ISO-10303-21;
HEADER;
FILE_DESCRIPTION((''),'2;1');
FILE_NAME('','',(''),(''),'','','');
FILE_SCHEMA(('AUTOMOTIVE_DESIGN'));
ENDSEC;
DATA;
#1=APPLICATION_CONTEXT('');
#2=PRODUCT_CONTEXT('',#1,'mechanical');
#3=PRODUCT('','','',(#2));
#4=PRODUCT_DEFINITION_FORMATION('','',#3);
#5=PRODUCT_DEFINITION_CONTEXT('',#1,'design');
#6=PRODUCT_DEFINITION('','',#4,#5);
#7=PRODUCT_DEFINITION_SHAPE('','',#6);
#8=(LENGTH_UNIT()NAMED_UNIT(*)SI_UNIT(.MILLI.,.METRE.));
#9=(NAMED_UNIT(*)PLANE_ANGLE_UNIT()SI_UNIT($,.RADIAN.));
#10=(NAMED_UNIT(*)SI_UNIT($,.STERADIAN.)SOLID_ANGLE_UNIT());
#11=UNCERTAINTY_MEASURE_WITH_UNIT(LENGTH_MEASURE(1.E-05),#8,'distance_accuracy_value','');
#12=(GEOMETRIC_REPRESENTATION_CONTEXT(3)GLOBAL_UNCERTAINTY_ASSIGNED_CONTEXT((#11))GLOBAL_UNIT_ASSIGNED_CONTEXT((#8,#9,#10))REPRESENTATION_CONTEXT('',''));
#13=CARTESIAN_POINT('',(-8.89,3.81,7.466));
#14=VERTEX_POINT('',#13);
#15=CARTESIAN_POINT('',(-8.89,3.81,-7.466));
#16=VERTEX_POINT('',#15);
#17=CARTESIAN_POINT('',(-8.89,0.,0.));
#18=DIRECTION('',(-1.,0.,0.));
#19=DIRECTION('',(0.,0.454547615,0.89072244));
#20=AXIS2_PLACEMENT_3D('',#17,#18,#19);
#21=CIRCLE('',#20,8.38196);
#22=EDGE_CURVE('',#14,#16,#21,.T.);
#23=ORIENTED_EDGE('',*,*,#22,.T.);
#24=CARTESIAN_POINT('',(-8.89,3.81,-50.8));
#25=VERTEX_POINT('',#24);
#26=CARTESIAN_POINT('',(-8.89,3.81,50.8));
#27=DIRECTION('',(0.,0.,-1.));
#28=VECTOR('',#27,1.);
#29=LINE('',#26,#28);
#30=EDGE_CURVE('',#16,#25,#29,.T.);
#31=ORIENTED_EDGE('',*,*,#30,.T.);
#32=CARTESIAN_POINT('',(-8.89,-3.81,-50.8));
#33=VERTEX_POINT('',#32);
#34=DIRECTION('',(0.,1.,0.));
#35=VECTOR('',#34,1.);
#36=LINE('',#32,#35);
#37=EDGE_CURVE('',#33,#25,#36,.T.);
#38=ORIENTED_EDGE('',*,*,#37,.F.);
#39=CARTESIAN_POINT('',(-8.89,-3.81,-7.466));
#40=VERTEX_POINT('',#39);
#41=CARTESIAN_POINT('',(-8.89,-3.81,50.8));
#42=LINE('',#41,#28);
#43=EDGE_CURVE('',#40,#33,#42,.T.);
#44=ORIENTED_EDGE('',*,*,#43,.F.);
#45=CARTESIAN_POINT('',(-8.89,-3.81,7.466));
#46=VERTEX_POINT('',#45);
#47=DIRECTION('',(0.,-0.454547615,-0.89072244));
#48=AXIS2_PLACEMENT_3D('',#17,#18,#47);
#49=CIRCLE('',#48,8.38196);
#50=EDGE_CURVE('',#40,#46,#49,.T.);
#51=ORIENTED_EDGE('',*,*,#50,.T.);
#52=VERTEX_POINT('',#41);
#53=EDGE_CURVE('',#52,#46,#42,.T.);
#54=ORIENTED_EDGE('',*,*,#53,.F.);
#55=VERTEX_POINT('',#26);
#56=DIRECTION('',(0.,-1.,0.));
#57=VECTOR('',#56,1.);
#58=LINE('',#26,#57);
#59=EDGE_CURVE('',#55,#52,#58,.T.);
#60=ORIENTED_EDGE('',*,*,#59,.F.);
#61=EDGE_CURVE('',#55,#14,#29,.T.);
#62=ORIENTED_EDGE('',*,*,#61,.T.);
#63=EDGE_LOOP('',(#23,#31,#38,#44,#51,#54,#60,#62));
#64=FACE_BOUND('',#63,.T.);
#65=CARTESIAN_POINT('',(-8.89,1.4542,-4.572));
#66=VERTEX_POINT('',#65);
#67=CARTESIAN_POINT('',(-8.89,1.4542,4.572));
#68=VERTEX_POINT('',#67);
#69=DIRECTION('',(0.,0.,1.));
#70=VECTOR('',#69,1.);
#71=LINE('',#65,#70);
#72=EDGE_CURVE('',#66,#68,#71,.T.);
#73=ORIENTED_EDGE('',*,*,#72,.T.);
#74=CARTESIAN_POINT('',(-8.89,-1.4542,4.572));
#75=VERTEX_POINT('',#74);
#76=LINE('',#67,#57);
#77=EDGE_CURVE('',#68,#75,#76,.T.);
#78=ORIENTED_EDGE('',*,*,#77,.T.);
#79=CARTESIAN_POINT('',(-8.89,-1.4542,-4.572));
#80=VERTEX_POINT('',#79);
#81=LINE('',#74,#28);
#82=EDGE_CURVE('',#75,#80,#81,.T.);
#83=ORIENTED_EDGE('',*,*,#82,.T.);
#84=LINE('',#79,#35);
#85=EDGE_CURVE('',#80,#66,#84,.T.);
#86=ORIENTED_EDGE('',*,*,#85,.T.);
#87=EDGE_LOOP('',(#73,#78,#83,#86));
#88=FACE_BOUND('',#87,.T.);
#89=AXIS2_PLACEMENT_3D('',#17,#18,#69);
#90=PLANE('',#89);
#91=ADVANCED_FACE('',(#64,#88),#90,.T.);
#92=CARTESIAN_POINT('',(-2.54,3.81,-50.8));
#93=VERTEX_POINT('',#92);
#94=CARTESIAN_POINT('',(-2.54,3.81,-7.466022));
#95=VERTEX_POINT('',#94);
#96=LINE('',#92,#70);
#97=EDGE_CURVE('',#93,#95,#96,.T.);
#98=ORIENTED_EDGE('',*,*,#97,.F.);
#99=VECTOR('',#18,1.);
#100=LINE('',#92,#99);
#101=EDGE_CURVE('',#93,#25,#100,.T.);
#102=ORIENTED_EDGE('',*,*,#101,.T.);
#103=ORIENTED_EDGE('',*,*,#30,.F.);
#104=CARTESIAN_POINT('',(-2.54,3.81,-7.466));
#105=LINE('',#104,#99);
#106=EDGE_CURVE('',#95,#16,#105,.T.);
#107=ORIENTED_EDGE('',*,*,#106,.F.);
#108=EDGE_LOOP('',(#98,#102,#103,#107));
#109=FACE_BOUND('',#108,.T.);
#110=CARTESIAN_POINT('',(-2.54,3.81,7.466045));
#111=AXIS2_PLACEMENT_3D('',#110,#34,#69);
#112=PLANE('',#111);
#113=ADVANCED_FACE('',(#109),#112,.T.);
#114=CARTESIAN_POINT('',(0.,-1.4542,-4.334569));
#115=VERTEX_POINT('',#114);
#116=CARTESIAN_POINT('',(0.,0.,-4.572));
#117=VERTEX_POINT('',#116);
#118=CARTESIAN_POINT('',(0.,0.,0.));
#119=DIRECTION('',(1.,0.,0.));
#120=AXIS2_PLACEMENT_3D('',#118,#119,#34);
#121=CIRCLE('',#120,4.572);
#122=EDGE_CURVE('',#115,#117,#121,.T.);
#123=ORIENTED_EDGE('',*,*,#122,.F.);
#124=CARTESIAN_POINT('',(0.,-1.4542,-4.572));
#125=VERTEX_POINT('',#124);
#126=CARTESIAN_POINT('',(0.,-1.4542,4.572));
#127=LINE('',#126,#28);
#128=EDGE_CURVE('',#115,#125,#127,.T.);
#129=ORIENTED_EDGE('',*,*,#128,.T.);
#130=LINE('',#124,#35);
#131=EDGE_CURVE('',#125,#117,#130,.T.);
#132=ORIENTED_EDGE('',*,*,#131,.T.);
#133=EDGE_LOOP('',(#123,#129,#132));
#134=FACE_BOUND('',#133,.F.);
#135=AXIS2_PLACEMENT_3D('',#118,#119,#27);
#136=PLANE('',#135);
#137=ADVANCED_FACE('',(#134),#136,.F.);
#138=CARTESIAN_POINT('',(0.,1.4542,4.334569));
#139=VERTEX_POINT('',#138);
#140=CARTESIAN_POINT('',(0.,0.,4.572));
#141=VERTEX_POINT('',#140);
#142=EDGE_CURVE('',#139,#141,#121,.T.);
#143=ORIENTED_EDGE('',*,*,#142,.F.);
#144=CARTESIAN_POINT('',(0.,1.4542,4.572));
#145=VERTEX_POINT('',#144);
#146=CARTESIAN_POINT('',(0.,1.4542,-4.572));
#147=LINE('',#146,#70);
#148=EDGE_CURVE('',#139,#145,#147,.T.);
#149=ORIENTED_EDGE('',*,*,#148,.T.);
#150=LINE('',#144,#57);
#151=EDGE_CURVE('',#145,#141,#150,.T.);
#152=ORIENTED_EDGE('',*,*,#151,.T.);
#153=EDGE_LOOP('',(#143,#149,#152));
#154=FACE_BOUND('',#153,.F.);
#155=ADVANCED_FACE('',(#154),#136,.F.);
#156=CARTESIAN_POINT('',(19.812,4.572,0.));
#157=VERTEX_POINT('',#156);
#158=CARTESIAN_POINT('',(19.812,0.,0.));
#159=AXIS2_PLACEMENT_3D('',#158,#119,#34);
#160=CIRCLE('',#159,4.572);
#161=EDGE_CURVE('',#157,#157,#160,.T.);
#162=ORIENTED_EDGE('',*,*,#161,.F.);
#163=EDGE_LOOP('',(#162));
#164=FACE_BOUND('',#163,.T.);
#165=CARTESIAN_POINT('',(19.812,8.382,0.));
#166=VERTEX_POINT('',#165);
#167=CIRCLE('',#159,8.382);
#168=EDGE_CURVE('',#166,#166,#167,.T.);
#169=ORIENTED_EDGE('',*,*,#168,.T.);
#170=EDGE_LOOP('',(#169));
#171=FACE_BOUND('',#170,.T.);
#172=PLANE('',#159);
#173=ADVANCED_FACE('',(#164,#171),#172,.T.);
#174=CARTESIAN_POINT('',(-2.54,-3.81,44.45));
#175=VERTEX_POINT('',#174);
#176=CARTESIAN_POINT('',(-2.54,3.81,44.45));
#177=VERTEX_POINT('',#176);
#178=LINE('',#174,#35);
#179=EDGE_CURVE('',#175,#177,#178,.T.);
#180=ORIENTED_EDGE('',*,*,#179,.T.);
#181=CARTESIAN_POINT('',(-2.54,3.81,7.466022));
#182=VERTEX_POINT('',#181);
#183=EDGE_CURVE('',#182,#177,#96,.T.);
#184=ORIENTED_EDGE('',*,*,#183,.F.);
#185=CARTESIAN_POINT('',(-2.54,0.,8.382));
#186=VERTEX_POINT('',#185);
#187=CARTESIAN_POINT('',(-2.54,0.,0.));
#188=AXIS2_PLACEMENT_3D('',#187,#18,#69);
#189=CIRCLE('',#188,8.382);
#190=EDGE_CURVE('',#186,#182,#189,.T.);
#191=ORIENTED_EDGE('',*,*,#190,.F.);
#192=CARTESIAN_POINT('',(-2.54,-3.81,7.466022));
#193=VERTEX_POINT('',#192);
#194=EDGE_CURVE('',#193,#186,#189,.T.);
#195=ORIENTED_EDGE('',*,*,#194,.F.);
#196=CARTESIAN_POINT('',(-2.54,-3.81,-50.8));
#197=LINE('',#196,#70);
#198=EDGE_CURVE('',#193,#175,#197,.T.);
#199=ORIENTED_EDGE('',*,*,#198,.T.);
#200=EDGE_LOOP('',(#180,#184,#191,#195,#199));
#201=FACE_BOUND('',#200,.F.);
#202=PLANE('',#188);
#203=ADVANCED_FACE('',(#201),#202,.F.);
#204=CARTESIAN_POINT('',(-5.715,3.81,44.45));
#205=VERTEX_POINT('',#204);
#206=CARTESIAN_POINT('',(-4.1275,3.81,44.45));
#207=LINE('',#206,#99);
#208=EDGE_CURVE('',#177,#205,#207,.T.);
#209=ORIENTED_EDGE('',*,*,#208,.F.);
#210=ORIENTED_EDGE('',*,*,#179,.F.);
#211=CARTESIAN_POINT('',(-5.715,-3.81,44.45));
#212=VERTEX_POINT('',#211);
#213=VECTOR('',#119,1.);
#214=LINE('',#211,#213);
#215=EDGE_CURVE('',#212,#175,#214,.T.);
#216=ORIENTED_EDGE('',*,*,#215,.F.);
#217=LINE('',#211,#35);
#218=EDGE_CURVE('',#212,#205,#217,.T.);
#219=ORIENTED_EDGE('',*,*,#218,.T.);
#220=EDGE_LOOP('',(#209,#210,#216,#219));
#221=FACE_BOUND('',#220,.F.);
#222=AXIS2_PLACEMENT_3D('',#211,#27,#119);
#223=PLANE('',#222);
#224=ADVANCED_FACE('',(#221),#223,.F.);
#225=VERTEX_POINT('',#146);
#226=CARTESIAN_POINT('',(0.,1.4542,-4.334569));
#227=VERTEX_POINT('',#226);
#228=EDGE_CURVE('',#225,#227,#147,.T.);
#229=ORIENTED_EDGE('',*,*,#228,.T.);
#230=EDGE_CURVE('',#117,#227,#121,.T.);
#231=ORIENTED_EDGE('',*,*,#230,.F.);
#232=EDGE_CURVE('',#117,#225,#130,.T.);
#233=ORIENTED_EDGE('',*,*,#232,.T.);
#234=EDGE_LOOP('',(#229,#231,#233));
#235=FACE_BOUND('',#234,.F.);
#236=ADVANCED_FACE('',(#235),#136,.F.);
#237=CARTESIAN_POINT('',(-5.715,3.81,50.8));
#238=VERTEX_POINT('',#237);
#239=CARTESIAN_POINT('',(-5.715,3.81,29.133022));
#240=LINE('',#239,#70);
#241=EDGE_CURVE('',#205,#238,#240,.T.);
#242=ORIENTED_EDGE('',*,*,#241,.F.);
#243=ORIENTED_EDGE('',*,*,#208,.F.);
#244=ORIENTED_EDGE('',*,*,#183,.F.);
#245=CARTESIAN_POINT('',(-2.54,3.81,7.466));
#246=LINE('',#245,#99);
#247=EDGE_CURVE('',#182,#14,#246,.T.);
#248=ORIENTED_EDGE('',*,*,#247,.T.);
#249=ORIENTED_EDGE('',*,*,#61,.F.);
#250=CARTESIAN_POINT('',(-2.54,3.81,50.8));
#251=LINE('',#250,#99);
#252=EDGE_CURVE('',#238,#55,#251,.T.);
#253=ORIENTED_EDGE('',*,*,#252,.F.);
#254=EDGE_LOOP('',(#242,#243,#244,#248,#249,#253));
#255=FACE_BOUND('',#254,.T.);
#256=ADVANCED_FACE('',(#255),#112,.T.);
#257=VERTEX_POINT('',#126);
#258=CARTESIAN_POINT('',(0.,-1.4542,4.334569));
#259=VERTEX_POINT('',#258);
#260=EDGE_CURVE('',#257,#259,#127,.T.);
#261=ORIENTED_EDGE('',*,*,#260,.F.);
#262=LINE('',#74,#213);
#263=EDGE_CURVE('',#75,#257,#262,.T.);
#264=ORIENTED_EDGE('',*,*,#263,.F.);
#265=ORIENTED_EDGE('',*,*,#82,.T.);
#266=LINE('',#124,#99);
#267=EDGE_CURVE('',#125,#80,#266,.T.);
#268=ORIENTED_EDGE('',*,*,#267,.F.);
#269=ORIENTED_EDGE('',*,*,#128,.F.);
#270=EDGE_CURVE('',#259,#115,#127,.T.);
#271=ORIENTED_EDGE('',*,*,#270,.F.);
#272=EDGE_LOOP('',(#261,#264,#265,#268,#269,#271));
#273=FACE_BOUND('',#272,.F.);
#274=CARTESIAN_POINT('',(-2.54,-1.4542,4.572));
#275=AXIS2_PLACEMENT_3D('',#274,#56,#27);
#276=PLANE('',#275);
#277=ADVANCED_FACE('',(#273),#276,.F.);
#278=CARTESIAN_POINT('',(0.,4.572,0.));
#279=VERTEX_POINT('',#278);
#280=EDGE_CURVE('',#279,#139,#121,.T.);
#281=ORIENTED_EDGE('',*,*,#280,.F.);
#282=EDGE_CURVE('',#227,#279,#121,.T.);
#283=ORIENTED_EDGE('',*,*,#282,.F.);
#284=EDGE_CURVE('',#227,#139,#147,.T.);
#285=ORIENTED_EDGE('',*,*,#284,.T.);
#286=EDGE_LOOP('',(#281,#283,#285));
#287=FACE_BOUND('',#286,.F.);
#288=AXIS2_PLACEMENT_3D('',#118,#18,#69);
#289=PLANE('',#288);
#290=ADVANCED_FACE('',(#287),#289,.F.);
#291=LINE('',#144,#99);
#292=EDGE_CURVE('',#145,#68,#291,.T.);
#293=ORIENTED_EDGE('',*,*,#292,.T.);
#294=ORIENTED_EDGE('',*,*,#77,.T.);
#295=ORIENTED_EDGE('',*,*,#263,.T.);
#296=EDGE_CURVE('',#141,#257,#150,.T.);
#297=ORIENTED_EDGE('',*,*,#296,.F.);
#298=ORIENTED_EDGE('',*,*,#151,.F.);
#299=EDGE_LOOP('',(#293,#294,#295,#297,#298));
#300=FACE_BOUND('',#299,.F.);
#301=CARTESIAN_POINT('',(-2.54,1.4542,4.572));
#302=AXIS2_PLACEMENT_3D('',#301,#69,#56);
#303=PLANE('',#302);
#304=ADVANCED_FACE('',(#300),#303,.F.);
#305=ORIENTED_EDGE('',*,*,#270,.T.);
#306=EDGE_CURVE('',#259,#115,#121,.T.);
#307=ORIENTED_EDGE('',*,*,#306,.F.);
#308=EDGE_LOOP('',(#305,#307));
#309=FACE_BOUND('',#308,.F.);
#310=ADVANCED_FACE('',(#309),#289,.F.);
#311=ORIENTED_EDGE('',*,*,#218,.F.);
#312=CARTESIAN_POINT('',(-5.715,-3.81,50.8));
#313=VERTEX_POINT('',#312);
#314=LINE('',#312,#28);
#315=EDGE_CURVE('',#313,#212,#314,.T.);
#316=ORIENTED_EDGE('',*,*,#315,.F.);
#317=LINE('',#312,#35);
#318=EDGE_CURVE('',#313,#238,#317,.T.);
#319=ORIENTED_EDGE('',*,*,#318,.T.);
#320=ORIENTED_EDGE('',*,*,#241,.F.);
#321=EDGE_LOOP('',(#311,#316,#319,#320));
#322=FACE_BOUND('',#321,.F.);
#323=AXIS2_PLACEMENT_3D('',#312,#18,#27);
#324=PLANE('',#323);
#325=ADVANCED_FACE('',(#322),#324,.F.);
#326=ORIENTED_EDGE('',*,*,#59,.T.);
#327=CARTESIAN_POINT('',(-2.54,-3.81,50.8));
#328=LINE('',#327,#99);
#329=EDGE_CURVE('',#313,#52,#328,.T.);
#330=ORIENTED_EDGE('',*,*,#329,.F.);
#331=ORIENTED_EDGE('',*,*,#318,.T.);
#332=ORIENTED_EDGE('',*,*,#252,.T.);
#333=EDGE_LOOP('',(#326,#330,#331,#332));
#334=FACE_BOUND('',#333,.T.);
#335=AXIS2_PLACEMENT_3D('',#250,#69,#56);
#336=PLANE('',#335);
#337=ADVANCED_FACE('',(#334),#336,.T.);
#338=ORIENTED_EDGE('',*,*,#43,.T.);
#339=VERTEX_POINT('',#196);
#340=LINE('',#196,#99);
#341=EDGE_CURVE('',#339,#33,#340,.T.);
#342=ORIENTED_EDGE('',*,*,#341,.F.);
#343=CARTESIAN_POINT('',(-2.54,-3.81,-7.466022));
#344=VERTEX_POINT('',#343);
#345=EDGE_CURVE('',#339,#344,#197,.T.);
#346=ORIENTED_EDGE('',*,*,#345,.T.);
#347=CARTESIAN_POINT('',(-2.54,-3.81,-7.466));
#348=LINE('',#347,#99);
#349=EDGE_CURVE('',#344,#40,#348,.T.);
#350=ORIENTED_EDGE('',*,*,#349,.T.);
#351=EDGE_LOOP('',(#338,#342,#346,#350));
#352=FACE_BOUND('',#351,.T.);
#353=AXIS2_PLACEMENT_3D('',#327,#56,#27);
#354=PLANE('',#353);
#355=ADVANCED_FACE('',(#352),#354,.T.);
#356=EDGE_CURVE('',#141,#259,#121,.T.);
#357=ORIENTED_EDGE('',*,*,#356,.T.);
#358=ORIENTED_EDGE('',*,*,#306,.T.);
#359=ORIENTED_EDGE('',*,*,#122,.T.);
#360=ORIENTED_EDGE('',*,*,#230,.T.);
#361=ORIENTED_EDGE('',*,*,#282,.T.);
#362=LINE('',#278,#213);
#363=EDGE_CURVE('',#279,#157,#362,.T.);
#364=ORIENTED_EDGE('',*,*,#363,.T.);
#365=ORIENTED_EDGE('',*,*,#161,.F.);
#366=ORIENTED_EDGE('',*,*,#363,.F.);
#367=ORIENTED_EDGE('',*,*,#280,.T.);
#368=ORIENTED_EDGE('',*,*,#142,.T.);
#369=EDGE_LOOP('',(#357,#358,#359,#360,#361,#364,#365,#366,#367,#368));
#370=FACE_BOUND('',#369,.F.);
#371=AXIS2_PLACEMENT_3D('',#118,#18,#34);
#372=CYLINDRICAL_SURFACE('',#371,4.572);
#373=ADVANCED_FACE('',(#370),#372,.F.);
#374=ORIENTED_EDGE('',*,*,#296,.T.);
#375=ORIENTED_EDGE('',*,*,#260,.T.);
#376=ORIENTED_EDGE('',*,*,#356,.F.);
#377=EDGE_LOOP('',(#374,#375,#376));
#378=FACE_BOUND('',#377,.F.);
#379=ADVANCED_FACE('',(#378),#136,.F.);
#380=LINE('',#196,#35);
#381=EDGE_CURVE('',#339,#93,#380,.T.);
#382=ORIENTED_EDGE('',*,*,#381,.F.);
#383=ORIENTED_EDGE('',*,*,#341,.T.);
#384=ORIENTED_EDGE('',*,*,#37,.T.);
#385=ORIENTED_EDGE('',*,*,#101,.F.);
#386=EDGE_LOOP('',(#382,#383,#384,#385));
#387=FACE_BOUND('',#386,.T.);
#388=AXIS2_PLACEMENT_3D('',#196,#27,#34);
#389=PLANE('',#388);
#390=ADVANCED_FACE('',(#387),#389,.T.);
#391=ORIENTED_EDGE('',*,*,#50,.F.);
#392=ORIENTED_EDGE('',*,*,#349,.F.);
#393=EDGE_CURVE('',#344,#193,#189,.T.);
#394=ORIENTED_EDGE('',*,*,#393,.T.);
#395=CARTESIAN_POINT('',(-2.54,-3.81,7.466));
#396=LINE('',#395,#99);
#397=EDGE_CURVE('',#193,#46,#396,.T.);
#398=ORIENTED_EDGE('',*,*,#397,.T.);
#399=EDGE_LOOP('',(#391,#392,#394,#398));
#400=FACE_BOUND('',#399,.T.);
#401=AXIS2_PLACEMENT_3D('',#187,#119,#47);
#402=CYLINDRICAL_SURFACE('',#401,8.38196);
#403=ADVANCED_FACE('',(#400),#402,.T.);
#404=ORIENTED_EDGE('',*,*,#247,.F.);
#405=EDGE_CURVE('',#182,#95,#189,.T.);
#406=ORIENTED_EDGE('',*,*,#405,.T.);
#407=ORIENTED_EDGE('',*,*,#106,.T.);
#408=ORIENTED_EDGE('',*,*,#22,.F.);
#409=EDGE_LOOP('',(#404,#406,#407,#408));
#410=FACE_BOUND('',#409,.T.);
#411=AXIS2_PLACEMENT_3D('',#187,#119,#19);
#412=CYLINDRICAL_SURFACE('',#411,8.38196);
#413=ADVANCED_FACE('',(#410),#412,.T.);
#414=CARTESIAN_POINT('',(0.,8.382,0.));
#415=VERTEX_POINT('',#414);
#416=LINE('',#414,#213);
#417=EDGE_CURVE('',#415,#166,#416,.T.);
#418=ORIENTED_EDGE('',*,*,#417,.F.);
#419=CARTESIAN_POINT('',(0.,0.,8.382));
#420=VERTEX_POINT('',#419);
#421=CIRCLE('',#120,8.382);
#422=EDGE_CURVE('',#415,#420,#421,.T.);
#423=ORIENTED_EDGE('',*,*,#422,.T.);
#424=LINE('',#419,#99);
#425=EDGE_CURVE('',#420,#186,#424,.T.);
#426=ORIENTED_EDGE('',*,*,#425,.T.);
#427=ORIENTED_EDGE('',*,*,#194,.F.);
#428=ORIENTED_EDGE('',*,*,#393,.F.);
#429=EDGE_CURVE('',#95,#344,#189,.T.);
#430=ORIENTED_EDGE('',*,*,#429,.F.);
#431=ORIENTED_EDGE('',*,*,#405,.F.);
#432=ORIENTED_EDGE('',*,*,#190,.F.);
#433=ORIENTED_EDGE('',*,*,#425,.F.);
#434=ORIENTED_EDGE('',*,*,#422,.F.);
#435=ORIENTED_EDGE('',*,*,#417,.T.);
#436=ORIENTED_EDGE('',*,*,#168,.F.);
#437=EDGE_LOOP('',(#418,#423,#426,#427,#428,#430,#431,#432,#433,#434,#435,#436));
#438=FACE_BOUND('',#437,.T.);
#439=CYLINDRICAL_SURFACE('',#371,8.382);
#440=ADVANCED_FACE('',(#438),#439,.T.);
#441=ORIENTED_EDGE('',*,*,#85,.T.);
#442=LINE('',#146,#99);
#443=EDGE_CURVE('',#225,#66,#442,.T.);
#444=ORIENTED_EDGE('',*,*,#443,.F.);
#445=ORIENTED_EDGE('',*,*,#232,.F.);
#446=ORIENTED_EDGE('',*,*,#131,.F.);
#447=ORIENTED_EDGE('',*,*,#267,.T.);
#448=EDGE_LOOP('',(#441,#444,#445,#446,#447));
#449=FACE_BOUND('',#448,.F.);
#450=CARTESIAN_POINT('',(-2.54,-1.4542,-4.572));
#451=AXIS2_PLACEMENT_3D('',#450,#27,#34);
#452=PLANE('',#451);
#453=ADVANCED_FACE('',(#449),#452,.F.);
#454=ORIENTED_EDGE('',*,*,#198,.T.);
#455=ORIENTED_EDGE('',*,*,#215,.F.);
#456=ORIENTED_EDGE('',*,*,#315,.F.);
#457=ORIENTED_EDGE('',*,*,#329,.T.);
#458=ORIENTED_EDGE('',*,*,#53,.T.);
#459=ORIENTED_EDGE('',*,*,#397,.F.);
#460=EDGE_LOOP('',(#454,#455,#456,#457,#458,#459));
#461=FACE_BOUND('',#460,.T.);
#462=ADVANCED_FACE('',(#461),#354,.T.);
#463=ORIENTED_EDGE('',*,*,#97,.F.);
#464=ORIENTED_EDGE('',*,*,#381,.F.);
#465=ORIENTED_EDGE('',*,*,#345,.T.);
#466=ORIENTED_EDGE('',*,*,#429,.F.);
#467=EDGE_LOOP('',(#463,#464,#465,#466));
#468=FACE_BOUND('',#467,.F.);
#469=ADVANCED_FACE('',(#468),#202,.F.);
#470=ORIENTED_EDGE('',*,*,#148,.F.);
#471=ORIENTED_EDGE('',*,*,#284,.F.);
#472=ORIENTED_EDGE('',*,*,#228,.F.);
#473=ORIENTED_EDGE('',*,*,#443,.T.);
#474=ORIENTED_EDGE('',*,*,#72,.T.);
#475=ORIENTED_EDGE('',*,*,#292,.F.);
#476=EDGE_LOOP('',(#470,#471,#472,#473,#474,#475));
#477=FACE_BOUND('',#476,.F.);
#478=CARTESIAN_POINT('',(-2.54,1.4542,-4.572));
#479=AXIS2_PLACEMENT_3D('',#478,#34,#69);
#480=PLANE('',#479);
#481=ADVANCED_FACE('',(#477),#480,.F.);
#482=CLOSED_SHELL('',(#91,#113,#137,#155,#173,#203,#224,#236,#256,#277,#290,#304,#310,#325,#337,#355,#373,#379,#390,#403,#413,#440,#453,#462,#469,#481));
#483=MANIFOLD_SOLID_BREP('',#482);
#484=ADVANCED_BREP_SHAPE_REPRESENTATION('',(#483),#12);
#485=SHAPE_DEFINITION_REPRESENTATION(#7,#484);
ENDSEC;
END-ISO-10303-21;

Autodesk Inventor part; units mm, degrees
ref_plane "YZ Plane" through (0, 0, 0) normal (1, 0, 0) x (0, 1, 0)
ref_plane "XZ Plane" through (0, 0, 0) normal (0, 1, 0) x (-1, 0, 0)
ref_plane "XY Plane" through (0, 0, 0) normal (0, 0, 1) x (1, 0, 0)
sketch "Sketch1" plane through (0, 0, 0) normal (1, 0, 0) x (0, 1, 0)
  circle A0 centre (0, 0) radius 4.572
  circle A1 centre (0, 0) radius 8.382
  dimension "d0" = 9.144
  dimension "d1" = 3.81
extrude "Extrusion1" add sketch "Sketch1" along normal blind 19.812
sketch "Sketch2" plane through (0, 0, 0) normal (-1, 0, 0) x (0, 0, 1)
  circle A0 centre (0, 0) radius 8.382
  circle A1 centre (0, 0) radius 7.747
  circle A2 centre (0, 0) radius 8.382 projected
  dimension "d42" = 0
extrude "Extrusion2" add sketch "Sketch2" along normal blind 2.54 contours A0 | A1
sketch "Sketch10" plane through (0, 0, 0) normal (1, 0, 0) x (0, 0, -1)
  circle A0 centre (0, 0) radius 1.4542
  line L0 (-4.572, 1.4542) -> (4.572, 1.4542)
  line L1 (4.572, 1.4542) -> (4.572, -1.4542)
  line L2 (4.572, -1.4542) -> (-4.572, -1.4542)
  line L3 (-4.572, -1.4542) -> (-4.572, 1.4542)
  circle A1 centre (0, 0) radius 4.572 projected
  dimension "d43" = 0
  dimension "d44" = 0
extrude "Extrusion7" cut sketch "Sketch10" against normal blind 22.225 contours A0 | A0 L0 A1 L2 | A0 L2 A1 L0 | A1 L3 L0 | L0 L1 A1 | A1 L1 L2 | L2 L3 A1
sketch "Sketch24" plane through (-2.54, 0, 0) normal (-1, 0, 0) x (0, 0, 1)
  line L0 (50.8, -3.81) -> (-50.8, -3.81)
  line L1 (-50.8, -3.81) -> (-50.8, 3.81)
  line L2 (-50.8, 3.81) -> (50.8, 3.81)
  line L3 (50.8, 3.81) -> (50.8, -3.81)
  line L4 (4.572, 1.4542) -> (4.572, -1.4542) projected
  line L5 (4.572, -1.4542) -> (-4.572, -1.4542) projected
  line L6 (-4.572, -1.4542) -> (-4.572, 1.4542) projected
  line L7 (-4.572, 1.4542) -> (4.572, 1.4542) projected
  circle A0 centre (0, 0) radius 8.382 projected
  dimension "d90" = 101.6
  dimension "d91" = 50.8
  dimension "d92" = 3.81
  dimension "d93" = 3.81
extrude "Extrusion18" add sketch "Sketch24" along normal blind 6.35 contours L0 A0 L2 L3 | L0 A0 L2 | L0 L1 L2 A0
sketch "Sketch25" plane through (-2.54, 0, 0) normal (-1, 0, 0) x (0, 0, 1)
  line L0 (-7.466, 3.81) -> (7.466, 3.81) projected
  arc A0 (7.466, 3.81) -> (-7.466, 3.81) centre (0, 0) ccw projected
  line L1 (7.466, -3.81) -> (-7.466, -3.81) projected
  arc A1 (-7.466, -3.81) -> (7.466, -3.81) centre (0, 0) ccw projected
extrude "Extrusion19" add sketch "Sketch25" along normal blind 6.35
sketch "Sketch26" plane through (-2.54, -3.81, 7.466) normal (0, -1, 0) x (1, 0, 0)
  line L0 (0, 0) -> (0, 43.334) projected
  line L1 (0, 43.334) -> (-3.175, 43.334)
  line L2 (-3.175, 43.334) -> (-3.175, 36.984)
  line L3 (-3.175, 36.984) -> (0, 36.984)
  line L4 (0, 36.984) -> (0, 43.334)
  point P0 (2.54, -7.466)
  dimension "d98" = 3.175
  dimension "d99" = 6.35
extrude "Extrusion20" cut sketch "Sketch26" against normal blind 25.4
properties part number "LiftMotorHousingOne"
